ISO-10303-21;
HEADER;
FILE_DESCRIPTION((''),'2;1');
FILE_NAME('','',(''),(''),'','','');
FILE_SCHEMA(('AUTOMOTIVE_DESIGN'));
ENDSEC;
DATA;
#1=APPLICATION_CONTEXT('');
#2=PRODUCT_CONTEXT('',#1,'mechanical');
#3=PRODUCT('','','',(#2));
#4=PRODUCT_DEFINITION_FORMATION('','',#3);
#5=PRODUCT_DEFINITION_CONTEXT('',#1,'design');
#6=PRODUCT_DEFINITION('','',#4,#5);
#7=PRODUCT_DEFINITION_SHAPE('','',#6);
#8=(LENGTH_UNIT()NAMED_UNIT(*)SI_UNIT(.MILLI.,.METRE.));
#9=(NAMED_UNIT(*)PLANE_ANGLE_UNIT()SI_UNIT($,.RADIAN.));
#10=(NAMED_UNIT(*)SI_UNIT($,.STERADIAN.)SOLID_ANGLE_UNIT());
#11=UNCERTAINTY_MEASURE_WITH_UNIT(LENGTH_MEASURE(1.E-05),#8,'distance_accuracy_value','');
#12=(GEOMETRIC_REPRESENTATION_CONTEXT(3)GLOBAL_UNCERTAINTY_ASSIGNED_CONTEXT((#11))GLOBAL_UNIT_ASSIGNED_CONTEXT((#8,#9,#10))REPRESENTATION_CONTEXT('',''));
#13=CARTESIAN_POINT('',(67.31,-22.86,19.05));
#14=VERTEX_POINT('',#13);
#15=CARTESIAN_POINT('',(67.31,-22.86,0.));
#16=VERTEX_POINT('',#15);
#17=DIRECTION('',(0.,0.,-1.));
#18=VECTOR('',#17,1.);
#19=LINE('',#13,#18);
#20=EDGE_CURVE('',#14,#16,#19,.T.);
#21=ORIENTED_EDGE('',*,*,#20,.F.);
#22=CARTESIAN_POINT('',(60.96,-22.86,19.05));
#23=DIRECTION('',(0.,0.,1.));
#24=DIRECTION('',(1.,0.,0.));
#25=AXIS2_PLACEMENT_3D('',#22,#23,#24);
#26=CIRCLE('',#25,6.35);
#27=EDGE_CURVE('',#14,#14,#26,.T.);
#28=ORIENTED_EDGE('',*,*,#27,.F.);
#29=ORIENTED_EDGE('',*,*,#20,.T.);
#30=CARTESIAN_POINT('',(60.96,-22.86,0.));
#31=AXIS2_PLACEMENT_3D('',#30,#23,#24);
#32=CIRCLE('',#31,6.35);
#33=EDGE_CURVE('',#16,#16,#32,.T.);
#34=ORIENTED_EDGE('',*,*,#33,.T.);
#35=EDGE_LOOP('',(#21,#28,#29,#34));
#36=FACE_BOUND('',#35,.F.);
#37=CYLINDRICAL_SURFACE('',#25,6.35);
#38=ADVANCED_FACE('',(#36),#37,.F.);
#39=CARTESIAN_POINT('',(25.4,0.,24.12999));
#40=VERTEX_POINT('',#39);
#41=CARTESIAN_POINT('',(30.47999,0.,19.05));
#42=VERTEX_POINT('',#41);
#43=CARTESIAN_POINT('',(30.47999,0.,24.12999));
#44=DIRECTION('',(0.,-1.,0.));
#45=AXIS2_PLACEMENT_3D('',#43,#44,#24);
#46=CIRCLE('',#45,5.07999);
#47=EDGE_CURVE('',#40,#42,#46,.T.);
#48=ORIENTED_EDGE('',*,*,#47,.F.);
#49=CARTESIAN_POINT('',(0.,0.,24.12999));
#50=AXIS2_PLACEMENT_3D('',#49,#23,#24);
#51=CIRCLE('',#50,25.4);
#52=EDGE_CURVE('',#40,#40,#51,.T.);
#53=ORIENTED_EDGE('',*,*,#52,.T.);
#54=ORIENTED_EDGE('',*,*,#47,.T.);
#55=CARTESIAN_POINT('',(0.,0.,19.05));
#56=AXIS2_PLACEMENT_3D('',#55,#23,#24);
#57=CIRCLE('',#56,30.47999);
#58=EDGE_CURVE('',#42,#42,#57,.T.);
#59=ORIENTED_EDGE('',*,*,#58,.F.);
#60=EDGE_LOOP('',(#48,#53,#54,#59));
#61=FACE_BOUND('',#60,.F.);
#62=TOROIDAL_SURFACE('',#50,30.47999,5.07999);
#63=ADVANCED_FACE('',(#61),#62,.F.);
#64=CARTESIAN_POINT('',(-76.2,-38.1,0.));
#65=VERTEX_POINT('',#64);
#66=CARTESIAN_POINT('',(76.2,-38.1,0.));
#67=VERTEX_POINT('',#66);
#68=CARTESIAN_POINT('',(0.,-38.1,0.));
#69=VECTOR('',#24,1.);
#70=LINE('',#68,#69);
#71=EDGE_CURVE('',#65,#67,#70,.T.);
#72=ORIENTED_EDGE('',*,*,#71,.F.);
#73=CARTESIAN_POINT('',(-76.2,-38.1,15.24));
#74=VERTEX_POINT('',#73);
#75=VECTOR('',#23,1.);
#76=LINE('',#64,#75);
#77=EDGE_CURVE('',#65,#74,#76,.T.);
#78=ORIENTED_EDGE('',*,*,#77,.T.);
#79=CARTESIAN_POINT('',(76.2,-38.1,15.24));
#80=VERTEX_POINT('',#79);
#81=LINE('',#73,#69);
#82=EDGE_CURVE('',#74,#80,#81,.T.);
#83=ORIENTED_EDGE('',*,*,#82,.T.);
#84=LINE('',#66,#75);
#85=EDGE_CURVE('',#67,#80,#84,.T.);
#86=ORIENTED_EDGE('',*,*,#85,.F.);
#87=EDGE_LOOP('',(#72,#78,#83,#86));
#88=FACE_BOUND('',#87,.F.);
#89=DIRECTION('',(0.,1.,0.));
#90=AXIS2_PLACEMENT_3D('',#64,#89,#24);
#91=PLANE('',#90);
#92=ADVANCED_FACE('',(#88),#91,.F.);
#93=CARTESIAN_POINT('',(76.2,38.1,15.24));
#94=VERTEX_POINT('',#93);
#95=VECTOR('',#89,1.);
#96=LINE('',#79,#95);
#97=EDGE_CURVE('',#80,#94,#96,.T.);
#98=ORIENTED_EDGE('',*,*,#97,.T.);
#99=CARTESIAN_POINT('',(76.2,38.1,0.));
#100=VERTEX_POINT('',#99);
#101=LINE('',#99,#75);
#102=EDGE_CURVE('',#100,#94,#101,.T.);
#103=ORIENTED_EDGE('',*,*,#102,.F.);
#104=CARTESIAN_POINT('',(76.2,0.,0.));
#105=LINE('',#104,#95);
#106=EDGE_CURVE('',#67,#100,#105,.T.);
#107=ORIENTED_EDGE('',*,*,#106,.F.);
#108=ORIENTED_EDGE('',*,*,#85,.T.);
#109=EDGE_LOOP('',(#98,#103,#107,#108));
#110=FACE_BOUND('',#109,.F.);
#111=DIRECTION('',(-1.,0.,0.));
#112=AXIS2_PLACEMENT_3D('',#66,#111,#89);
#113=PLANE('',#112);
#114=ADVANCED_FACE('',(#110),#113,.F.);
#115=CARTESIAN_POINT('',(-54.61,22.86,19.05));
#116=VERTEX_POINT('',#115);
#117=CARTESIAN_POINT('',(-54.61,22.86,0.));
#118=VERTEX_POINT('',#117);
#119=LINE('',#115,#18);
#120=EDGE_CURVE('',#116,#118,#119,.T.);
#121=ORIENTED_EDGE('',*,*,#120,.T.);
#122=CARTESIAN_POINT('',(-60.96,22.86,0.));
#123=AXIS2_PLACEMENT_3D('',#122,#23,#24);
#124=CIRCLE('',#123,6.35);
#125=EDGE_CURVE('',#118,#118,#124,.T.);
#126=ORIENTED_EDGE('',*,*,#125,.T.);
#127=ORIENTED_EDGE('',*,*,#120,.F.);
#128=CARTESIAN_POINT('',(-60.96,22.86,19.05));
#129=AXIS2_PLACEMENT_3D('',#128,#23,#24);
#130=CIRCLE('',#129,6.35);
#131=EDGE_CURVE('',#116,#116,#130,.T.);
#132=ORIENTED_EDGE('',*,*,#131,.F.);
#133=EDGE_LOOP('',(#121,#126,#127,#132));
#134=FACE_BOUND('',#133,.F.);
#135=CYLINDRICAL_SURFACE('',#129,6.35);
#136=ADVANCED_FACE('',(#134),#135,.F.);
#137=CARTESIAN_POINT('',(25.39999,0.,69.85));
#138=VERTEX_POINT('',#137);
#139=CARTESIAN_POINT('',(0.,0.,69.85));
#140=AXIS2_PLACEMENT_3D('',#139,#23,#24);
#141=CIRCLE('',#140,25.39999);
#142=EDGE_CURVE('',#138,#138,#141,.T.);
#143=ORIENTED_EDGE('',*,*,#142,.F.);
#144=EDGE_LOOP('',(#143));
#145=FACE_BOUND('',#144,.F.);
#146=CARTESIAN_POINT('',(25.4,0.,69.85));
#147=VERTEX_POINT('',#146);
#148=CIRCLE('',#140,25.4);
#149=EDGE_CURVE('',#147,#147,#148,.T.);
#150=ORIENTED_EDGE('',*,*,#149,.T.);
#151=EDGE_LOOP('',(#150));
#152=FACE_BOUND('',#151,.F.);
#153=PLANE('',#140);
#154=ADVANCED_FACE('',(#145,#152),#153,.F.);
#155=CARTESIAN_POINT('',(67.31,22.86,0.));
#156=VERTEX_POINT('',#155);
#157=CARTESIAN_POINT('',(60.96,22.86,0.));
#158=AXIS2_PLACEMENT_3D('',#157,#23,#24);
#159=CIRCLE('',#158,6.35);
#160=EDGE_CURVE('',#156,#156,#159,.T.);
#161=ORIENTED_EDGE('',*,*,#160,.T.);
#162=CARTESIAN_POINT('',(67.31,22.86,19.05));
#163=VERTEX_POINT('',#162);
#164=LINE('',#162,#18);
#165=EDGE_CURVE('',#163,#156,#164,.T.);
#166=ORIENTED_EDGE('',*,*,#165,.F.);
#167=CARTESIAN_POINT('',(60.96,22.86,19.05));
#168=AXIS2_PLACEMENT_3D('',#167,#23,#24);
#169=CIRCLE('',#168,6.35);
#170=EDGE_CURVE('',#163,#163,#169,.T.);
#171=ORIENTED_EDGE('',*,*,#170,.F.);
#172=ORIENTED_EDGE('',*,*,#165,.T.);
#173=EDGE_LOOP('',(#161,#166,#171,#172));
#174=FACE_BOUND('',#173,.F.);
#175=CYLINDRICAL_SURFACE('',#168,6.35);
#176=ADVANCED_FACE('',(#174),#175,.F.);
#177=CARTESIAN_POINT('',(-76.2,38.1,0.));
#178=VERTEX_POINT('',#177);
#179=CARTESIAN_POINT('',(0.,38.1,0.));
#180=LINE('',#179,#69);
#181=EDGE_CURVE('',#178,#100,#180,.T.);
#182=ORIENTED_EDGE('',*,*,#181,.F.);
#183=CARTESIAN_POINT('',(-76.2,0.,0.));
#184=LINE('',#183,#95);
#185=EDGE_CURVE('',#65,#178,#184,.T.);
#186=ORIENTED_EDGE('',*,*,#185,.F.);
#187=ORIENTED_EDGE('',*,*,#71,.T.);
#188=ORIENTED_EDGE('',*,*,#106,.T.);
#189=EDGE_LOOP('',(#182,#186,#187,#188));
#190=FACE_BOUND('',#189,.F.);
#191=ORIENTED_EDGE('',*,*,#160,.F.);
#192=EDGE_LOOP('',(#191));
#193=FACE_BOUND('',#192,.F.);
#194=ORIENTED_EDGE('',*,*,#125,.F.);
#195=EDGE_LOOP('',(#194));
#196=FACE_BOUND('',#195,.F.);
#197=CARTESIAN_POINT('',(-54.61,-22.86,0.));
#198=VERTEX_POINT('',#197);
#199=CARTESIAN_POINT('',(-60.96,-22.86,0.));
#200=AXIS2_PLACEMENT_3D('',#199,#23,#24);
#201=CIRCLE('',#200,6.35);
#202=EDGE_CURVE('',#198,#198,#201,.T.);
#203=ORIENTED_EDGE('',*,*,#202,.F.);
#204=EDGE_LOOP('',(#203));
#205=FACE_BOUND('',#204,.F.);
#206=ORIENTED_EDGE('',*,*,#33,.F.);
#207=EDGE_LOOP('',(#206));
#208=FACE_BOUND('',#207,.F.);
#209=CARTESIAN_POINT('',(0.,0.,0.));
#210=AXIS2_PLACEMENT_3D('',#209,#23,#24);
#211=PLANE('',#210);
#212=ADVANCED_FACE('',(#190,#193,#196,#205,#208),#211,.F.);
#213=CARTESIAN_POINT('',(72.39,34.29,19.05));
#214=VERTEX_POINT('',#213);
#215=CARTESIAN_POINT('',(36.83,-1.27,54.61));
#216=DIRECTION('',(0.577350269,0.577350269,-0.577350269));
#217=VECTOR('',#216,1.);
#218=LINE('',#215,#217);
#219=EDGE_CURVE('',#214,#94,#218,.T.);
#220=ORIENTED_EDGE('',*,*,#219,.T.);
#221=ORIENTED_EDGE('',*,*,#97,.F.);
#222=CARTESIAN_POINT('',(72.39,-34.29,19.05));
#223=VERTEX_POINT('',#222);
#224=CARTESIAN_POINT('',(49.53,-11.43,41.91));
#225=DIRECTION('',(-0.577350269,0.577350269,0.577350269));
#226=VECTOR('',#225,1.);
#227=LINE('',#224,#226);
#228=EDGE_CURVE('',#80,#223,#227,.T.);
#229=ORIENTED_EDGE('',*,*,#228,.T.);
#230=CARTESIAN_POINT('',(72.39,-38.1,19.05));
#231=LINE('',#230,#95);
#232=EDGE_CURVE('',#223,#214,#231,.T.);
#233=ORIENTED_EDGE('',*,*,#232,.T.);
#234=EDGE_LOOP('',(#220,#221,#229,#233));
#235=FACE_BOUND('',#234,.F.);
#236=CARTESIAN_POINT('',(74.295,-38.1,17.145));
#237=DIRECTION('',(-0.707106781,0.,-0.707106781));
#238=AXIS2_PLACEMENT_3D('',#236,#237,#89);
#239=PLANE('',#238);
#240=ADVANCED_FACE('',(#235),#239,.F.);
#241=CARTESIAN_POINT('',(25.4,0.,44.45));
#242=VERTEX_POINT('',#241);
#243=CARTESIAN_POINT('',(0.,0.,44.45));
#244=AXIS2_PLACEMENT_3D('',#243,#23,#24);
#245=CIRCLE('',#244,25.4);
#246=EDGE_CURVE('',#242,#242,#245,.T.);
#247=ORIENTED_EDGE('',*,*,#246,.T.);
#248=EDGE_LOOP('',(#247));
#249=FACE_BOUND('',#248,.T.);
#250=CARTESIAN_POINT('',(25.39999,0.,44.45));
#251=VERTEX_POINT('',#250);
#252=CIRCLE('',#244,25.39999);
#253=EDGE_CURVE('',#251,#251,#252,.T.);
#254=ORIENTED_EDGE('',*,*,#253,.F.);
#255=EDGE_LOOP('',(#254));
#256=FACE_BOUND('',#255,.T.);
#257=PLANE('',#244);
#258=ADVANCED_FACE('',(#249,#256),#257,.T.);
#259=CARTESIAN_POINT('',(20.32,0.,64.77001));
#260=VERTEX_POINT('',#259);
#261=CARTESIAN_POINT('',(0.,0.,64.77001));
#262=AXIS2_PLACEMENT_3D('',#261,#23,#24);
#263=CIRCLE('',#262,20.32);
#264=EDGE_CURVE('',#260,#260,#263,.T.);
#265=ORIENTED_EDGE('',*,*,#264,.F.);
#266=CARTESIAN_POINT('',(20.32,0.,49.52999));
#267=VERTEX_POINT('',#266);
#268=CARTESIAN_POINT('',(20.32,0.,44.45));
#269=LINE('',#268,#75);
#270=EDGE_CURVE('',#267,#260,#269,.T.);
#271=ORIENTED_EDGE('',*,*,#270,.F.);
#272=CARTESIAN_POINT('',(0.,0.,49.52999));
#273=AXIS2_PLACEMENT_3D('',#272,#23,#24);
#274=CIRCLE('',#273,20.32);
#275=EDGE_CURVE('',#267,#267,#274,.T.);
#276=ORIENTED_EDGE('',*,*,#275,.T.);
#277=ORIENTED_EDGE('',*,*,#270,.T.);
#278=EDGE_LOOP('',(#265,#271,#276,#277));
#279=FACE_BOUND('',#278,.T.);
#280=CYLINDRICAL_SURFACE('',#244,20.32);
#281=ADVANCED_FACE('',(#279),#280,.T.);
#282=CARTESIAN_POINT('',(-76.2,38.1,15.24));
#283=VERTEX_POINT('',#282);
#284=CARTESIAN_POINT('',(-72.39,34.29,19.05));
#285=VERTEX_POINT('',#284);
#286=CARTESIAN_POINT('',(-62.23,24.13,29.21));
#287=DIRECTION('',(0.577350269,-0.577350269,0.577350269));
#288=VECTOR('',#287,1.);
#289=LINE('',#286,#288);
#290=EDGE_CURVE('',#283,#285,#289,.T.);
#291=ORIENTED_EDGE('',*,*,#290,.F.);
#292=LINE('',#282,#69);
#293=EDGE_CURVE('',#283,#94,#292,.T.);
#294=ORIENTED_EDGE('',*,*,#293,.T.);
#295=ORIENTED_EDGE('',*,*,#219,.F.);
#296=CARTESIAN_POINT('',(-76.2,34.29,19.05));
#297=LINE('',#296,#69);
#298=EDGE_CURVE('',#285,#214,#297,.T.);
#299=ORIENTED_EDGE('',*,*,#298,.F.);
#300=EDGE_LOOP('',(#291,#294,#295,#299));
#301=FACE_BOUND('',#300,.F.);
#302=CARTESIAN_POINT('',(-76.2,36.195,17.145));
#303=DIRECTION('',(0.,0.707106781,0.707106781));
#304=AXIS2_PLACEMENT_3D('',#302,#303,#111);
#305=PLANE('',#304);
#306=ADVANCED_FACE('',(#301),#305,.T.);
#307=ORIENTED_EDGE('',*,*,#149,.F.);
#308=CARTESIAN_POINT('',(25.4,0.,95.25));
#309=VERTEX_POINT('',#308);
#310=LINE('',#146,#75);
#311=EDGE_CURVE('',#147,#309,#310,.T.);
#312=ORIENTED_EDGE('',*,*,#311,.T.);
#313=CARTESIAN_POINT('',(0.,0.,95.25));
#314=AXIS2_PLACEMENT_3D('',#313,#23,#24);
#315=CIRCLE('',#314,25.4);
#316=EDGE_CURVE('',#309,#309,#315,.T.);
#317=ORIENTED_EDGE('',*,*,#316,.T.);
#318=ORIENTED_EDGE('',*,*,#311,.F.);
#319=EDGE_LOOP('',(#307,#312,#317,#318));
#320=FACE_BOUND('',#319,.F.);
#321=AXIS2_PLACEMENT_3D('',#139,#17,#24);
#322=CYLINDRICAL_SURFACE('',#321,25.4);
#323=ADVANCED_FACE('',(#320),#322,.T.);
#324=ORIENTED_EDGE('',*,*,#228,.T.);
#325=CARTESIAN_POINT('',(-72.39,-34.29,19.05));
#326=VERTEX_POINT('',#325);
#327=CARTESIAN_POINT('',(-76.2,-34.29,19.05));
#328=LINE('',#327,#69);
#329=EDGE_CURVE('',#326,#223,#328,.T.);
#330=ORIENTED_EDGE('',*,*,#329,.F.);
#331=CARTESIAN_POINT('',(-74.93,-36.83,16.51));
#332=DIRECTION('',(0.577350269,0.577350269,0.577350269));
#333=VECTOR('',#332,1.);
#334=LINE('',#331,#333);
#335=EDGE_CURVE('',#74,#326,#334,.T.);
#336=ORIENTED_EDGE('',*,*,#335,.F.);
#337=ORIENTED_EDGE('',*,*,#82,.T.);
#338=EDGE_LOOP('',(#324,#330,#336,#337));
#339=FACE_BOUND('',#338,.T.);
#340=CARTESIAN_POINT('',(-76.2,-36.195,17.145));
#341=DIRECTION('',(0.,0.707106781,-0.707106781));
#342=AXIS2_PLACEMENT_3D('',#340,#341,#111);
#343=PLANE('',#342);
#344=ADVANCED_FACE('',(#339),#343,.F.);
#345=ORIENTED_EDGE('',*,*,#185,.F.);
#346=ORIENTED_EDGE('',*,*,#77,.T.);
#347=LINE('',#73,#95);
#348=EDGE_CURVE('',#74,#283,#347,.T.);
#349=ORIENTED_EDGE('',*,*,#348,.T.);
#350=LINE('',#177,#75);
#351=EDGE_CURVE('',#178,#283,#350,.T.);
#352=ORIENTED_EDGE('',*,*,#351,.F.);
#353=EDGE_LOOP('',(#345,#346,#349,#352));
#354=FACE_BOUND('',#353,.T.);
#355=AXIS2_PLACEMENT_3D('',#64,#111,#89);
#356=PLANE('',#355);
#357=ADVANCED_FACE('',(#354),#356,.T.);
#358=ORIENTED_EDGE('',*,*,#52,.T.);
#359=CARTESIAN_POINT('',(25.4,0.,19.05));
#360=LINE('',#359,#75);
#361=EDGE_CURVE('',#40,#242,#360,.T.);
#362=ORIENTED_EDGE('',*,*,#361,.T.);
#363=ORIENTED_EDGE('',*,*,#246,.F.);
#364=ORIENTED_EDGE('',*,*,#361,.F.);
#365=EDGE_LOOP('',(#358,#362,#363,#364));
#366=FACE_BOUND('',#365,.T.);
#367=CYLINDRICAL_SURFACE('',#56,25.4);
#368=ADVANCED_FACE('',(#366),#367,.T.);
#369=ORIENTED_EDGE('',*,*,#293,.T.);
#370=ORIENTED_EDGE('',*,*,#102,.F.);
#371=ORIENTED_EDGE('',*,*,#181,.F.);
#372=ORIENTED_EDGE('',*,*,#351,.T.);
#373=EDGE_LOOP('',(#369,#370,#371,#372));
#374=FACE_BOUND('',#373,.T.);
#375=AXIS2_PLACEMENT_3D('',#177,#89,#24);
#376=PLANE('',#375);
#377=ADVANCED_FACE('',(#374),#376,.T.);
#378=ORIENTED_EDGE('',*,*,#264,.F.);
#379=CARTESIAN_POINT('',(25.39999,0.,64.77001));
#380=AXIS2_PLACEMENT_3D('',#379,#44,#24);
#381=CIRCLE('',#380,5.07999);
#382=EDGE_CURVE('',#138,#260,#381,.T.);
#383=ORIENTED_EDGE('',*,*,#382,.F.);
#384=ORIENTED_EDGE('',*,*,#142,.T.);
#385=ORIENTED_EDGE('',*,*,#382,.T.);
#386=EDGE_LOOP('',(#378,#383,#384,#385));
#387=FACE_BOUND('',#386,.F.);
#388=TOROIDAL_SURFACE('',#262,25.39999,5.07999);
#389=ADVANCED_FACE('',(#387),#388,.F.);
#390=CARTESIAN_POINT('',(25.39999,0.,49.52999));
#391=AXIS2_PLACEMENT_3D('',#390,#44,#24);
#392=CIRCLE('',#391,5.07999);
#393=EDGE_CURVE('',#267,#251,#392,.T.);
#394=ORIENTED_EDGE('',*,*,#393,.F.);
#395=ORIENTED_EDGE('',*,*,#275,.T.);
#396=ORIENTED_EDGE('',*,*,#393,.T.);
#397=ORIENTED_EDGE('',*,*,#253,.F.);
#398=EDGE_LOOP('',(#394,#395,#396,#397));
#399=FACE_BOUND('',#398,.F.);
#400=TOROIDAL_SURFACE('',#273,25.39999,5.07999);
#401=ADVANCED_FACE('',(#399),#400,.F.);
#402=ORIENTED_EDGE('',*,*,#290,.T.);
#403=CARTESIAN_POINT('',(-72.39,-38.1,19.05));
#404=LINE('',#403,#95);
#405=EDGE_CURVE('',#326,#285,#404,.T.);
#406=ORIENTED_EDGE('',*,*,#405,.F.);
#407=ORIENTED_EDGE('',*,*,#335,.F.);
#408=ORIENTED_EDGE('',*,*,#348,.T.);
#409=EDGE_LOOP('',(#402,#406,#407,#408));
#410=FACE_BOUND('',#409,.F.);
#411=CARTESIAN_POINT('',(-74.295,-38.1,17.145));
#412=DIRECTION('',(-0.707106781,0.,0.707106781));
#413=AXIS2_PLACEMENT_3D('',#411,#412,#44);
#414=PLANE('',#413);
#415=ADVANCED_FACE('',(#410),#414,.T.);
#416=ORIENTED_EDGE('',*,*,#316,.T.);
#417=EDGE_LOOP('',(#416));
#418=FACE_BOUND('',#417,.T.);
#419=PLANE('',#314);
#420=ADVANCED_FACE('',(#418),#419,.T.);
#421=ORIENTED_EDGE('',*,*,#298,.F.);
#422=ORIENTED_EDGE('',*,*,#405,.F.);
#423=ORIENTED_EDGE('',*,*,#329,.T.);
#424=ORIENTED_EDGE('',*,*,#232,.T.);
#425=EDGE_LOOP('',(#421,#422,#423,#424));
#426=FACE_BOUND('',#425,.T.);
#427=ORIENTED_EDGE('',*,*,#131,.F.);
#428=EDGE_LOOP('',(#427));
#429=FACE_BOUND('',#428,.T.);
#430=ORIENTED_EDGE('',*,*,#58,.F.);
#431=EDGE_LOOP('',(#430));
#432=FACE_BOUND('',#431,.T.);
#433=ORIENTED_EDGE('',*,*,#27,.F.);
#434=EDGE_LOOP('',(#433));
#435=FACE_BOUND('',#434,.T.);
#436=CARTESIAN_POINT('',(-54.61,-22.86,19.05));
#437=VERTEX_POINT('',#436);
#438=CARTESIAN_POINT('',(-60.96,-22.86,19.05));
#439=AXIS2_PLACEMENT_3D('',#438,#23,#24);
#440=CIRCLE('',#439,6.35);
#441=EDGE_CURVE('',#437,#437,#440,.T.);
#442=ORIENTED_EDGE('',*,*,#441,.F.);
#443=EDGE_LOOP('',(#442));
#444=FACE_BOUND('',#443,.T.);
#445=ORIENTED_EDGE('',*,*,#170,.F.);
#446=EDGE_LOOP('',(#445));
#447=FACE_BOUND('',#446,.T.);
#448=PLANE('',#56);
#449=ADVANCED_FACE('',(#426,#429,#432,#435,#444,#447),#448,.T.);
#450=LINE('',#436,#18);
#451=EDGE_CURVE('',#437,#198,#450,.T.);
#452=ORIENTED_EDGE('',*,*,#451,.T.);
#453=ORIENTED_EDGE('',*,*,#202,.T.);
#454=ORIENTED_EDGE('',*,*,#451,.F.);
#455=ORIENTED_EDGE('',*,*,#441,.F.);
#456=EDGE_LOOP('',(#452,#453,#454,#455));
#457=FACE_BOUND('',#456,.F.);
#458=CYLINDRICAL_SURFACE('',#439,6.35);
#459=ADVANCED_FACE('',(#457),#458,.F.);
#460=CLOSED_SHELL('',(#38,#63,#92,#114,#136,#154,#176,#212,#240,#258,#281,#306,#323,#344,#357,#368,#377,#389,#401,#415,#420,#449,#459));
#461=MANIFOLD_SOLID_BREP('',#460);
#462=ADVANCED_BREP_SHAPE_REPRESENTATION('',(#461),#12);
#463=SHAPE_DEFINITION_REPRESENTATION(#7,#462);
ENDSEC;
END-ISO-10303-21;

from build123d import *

# Parameters (mm, degrees)
F0_W     = 152.4
F0_H     = 76.2
F1_DEPTH = 19.05
F2_R     = 6.35
F3_DEPTH = 19.05
F4_SIZE  = 3.81
F7_R     = 25.4
F8_DEPTH = 25.4
F9_R     = 5.07999


# Not quite as in the source:
# - a fillet or chamfer is up to 0.001 mm smaller than in the source, because OpenCascade refuses the exact size


with BuildPart() as f1:
    # F0 (on Top) → F1 (new body)
    with BuildSketch(Plane.XY):
        Rectangle(F0_W, F0_H)
    extrude(amount=F1_DEPTH)

    # F2 (on face) → F3 (cut, through all)
    with BuildSketch(Plane.XY.offset(19.05)):
        with Locations((-60.96, 22.86)):
            Circle(F2_R)
        with Locations((-60.96, -22.86)):
            Circle(F2_R)
        with Locations((60.96, 22.86)):
            Circle(F2_R)
        with Locations((60.96, -22.86)):
            Circle(F2_R)
    extrude(amount=-F3_DEPTH, mode=Mode.SUBTRACT)

    # F4
    f4_edges = [f1.edges().sort_by_distance(p)[0] for p in [
        (0, -38.1, 19.05),
        (76.2, 0, 19.05),
        (0, 38.1, 19.05),
        (-76.2, 0, 19.05),
    ]]
    chamfer(f4_edges, length=F4_SIZE)

    # F5 (on Front) → F6 (revolve)
    with BuildSketch(Plane.XZ):
        Polygon((0, 69.85), (0, 19.05), (25.4, 19.05), (25.4, 44.45), (20.32, 44.45), (20.32, 69.85), align=None)
    revolve(axis=Axis((0, 0, 44.45), (0, 0, 1)))

    # F7 (on face) → F8 (join)
    with BuildSketch(Plane.XY.offset(69.85)):
        Circle(F7_R)
    extrude(amount=F8_DEPTH)

    # F9 (radius 5.08 in the source; OpenCascade refuses exactly that, so slightly less here)
    f9_edges = [f1.edges().sort_by_distance(p)[0] for p in [
        (-25.4, 0, 19.05),
        (-20.32, 0, 44.45),
        (-20.32, 0, 69.85),
    ]]
    fillet(f9_edges, radius=F9_R)


solid = f1.part
